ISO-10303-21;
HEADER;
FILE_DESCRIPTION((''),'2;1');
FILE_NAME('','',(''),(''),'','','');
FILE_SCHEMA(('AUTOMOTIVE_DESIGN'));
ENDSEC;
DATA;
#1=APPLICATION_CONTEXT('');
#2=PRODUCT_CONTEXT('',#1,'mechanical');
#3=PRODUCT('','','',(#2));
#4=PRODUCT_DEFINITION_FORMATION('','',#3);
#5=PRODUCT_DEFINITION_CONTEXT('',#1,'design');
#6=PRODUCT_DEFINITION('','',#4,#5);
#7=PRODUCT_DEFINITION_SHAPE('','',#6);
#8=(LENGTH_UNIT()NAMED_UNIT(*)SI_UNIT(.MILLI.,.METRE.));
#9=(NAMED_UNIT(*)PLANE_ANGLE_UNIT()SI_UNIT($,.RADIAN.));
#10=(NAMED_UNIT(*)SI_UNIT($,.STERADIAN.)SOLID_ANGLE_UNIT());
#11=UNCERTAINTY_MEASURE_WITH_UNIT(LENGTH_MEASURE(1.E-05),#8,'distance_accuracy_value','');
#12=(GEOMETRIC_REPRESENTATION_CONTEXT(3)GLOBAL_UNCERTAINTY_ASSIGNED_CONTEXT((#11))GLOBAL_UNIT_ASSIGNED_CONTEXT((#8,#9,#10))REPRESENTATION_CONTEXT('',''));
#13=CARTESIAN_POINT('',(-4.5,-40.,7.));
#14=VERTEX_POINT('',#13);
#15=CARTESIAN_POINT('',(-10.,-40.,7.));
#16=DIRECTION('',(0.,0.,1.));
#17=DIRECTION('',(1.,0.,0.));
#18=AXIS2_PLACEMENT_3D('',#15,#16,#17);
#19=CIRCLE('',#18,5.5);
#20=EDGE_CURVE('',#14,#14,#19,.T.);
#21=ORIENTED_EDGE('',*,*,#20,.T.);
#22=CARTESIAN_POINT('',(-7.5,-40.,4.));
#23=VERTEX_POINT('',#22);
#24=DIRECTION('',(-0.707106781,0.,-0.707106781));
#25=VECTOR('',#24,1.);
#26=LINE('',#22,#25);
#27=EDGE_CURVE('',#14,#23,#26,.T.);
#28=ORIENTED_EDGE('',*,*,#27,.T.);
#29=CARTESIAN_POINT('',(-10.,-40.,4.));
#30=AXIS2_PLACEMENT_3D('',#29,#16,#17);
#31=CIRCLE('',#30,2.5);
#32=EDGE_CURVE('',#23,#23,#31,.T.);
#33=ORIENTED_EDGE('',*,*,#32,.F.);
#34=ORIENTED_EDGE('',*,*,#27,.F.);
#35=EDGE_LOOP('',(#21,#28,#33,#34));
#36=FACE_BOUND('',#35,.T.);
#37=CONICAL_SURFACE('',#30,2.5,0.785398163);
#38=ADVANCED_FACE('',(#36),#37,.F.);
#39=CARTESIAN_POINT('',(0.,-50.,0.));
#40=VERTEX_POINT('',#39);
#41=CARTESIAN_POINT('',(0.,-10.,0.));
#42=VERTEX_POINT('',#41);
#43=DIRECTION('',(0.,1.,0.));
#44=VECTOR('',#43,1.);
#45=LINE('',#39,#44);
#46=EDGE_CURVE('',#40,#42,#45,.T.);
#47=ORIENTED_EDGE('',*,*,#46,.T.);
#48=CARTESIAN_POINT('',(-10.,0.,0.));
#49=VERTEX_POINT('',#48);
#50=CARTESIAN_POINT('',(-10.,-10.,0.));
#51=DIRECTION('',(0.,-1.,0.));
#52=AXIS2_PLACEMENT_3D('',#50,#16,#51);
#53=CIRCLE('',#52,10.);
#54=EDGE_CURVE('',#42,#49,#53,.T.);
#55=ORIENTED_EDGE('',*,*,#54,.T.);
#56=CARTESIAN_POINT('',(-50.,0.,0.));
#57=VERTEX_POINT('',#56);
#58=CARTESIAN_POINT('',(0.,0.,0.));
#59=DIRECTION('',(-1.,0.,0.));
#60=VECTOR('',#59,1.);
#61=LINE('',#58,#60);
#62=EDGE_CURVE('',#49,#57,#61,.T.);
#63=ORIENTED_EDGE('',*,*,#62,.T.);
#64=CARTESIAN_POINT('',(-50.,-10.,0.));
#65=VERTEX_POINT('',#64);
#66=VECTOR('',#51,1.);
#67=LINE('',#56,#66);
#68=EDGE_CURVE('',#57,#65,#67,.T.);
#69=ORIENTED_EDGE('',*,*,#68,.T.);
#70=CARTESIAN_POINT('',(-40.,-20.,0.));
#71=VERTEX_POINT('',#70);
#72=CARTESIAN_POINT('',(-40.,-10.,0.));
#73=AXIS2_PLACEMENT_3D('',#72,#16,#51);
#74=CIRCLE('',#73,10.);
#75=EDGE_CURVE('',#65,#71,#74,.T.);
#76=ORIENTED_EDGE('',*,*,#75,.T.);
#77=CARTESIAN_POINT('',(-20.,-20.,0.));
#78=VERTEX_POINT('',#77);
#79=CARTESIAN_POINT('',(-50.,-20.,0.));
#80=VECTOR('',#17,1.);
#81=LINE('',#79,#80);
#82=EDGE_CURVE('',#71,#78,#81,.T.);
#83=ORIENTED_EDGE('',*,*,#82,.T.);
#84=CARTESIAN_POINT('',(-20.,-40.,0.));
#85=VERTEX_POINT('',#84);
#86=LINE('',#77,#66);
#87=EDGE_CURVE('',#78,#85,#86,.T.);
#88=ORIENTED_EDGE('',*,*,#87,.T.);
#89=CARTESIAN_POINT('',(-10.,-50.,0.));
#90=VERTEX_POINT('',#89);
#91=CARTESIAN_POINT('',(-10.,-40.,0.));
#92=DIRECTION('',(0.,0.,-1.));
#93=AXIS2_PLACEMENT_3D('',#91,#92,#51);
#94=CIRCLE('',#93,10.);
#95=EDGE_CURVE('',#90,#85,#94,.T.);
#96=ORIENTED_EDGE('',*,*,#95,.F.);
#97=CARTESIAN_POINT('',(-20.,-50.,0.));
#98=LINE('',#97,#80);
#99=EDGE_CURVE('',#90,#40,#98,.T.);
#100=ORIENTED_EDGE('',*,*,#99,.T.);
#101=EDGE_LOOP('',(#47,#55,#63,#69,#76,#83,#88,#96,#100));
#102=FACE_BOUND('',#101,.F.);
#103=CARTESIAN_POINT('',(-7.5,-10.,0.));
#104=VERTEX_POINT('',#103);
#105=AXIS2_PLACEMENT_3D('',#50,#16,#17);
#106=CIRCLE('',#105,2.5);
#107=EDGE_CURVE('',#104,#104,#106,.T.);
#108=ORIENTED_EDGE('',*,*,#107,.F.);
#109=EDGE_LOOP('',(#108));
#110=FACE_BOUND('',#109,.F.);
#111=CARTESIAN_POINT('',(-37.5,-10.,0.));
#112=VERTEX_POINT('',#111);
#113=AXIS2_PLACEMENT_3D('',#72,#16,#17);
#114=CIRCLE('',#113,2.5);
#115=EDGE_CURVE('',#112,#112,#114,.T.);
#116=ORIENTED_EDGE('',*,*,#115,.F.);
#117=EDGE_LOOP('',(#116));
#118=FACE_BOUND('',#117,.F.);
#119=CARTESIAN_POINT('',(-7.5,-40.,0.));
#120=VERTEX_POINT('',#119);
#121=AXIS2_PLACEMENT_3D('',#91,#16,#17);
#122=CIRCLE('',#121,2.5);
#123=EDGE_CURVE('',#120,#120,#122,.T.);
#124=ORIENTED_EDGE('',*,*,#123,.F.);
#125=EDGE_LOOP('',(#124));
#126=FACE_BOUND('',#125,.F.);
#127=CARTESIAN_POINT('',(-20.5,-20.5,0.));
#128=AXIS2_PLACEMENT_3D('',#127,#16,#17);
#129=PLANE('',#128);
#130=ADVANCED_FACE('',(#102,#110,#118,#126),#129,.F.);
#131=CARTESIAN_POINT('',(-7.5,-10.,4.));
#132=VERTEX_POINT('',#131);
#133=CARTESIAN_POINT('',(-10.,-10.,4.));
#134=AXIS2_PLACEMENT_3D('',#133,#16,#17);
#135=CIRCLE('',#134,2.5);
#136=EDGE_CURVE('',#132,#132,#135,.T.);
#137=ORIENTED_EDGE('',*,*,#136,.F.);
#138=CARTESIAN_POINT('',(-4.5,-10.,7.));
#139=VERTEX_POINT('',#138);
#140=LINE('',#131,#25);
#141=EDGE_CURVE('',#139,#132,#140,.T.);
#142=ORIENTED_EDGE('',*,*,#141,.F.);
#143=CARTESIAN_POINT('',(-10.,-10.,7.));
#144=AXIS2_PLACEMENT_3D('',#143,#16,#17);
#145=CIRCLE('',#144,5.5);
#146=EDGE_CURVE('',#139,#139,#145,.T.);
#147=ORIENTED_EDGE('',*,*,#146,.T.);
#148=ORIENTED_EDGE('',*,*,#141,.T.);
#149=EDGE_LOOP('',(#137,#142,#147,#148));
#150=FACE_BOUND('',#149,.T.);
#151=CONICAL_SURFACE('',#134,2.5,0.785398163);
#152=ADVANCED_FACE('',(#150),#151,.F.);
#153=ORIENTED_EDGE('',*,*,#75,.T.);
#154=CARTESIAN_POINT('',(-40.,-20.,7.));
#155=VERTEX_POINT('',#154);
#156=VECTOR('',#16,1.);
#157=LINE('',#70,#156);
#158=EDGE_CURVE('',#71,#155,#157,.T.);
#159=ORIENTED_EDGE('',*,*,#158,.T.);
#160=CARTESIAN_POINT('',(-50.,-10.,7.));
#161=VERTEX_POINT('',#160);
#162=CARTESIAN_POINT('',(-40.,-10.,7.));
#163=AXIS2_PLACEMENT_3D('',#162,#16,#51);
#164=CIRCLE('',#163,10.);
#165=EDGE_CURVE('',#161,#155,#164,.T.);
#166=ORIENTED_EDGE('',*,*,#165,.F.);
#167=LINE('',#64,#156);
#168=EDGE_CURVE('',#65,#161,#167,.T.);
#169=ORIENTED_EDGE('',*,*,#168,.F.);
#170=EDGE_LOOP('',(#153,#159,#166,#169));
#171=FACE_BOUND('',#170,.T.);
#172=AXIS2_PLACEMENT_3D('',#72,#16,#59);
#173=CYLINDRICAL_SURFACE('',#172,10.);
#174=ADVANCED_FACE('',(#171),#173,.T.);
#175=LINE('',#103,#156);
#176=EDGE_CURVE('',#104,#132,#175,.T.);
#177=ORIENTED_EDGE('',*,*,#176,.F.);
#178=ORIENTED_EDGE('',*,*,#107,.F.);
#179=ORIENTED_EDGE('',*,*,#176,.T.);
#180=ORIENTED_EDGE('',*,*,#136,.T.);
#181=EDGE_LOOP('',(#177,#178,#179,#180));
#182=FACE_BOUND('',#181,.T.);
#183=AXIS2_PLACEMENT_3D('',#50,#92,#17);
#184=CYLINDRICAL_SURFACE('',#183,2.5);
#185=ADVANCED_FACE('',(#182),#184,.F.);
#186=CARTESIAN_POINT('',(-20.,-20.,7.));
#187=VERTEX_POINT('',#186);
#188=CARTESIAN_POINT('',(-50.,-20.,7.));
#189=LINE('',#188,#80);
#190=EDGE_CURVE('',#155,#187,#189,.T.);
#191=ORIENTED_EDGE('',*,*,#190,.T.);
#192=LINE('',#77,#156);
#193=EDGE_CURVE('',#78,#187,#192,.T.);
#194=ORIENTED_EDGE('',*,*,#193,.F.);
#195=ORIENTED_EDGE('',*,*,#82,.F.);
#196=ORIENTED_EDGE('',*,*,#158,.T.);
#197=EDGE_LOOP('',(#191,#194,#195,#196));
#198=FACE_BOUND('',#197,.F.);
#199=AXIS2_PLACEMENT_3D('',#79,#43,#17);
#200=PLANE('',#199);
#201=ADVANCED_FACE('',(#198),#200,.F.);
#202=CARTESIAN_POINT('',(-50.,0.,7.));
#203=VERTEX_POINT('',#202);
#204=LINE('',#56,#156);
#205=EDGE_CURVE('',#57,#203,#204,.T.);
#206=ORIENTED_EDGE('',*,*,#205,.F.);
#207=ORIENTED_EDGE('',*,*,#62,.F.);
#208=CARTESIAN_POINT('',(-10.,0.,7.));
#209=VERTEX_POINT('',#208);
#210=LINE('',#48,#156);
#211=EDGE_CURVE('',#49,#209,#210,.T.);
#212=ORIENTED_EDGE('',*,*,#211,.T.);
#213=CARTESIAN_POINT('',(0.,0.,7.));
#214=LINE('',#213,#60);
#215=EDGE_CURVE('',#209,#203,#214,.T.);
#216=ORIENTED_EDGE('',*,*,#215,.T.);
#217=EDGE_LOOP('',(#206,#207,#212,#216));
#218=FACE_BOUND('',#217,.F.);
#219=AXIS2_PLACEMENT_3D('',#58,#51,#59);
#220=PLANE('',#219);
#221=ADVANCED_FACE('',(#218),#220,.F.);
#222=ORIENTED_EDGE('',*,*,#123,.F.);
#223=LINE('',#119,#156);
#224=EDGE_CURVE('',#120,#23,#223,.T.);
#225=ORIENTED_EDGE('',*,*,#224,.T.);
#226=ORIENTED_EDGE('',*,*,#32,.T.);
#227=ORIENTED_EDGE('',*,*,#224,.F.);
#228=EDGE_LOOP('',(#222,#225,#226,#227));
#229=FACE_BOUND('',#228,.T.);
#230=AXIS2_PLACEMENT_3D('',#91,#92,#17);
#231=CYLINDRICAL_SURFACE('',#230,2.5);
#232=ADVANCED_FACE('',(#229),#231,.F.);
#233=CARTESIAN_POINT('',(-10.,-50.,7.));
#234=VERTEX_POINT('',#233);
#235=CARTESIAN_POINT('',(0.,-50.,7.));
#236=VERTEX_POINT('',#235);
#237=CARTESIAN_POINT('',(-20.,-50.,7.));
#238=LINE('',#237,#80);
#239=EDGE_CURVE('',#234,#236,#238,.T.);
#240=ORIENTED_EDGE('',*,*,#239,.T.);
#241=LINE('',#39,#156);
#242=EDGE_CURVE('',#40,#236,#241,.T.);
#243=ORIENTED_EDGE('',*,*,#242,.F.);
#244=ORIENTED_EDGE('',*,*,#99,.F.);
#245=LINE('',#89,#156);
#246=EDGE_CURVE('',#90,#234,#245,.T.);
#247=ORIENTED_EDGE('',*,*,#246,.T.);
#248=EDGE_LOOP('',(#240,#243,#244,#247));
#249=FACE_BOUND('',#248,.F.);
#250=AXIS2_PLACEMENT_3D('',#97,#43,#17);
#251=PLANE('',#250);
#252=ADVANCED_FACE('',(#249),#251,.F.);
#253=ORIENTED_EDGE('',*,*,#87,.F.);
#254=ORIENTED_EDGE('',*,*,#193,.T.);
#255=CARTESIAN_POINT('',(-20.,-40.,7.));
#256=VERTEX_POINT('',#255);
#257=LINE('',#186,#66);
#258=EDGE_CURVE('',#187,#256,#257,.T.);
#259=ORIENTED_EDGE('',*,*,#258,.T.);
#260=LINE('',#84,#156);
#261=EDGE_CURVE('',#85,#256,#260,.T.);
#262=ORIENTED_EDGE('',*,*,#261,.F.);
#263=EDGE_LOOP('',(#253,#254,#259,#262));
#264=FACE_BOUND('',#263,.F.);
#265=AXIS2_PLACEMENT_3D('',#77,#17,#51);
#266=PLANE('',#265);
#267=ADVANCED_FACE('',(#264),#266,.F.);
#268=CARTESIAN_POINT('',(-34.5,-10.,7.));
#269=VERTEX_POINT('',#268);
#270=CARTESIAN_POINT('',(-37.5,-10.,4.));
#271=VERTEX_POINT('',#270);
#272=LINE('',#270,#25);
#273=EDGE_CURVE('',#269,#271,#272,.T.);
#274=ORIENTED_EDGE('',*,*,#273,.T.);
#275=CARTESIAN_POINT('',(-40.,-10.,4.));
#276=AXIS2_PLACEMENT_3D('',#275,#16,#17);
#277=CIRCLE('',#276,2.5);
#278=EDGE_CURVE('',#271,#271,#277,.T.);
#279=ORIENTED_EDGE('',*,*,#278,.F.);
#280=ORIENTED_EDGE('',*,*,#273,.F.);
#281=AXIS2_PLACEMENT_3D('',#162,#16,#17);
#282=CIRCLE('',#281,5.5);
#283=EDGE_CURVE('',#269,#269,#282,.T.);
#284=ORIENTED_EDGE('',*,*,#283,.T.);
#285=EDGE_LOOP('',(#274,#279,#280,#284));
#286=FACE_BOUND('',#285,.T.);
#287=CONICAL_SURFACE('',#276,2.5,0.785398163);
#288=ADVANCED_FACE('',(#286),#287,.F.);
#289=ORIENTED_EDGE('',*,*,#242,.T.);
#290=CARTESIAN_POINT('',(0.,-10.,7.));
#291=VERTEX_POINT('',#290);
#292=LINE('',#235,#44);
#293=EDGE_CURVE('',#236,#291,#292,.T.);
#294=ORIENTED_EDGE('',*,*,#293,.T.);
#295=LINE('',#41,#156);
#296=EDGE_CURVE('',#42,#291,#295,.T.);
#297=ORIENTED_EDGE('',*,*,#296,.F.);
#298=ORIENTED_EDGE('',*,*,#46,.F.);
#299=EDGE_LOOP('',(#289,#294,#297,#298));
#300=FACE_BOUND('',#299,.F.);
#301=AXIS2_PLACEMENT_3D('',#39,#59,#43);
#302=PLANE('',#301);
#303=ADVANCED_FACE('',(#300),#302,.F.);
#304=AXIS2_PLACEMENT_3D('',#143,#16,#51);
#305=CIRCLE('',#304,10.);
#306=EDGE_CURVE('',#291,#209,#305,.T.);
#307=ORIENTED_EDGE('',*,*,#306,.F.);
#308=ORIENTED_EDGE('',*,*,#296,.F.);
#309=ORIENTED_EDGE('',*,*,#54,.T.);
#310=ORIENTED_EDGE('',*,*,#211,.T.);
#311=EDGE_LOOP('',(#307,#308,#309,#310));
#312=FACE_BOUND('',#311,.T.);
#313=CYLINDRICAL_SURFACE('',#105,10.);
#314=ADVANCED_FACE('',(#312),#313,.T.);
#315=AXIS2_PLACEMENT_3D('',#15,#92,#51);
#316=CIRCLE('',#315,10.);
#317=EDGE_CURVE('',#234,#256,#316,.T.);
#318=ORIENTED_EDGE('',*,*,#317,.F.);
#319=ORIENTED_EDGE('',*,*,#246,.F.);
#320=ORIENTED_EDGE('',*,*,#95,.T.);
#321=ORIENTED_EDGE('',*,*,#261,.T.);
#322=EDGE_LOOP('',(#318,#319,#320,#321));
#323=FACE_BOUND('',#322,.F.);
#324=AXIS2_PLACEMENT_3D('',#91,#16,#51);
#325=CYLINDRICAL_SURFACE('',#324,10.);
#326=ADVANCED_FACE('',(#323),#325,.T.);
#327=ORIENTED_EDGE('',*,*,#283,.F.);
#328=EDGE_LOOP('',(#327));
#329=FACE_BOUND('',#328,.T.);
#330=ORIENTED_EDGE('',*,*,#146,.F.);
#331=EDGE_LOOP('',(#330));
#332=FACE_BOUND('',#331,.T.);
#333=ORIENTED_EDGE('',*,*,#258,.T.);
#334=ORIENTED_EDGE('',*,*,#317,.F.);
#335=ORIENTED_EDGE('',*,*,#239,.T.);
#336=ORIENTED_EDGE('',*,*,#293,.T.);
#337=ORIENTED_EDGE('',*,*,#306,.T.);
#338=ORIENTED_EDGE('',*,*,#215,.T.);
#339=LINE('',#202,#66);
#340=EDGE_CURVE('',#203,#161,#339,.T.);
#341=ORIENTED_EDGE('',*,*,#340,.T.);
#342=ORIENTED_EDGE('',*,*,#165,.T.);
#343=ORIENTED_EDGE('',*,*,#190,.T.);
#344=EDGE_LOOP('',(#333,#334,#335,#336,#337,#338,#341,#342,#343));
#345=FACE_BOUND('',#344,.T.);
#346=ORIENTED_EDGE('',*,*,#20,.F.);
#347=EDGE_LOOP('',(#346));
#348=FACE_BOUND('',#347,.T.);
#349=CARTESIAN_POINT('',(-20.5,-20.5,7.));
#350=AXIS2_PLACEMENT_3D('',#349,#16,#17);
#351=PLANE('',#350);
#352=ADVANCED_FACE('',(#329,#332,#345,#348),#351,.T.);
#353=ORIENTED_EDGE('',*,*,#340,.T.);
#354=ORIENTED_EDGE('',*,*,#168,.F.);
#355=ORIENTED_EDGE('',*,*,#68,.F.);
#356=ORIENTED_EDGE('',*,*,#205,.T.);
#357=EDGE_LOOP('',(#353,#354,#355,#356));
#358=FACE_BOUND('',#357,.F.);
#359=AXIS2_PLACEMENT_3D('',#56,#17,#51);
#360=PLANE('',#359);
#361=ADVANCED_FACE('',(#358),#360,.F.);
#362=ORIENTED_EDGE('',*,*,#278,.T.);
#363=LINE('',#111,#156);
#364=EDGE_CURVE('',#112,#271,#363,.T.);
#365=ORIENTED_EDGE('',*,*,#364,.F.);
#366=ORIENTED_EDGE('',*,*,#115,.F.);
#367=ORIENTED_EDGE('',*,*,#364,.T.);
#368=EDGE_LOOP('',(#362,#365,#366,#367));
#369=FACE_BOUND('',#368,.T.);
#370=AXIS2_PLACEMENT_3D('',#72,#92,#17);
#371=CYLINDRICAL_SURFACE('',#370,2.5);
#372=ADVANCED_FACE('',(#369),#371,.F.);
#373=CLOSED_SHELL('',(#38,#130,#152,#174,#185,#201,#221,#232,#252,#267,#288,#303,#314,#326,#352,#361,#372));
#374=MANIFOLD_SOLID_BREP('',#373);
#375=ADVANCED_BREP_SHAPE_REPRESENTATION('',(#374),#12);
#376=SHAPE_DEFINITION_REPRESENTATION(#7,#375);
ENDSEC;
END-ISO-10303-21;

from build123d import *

# Parameters (mm, degrees)
F0_R     = 2.5
F1_DEPTH = 7
F2_R     = 10
F3_SIZE  = 3


# Not quite as in the source:
# - a feature names something its author has since deleted; it is built from what else it names


with BuildPart() as f1:
    # F0 (on Top) → F1 (new body)
    with BuildSketch(Plane.XY):
        Polygon((0, -50), (0, 0), (-50, 0), (-50, -20), (-20, -20), (-20, -50), align=None)
        with Locations((-10, -40)):
            Circle(F0_R, mode=Mode.SUBTRACT)
        with Locations((-40, -10)):
            Circle(F0_R, mode=Mode.SUBTRACT)
        with Locations((-10, -10)):
            Circle(F0_R, mode=Mode.SUBTRACT)
    extrude(amount=F1_DEPTH)

    # F2
    f2_edges = [f1.edges().sort_by_distance(p)[0] for p in [
        (0, 0, 3.5),
        (-20, -50, 3.5),
        (-50, -20, 3.5),
    ]]
    fillet(f2_edges, radius=F2_R)

    # F3
    f3_edges = [f1.edges().sort_by_distance(p)[0] for p in [
        (-42.5, -10, 7),
        (-12.5, -40, 7),
        (-12.5, -10, 7),
    ]]
    chamfer(f3_edges, length=F3_SIZE)


solid = f1.part
